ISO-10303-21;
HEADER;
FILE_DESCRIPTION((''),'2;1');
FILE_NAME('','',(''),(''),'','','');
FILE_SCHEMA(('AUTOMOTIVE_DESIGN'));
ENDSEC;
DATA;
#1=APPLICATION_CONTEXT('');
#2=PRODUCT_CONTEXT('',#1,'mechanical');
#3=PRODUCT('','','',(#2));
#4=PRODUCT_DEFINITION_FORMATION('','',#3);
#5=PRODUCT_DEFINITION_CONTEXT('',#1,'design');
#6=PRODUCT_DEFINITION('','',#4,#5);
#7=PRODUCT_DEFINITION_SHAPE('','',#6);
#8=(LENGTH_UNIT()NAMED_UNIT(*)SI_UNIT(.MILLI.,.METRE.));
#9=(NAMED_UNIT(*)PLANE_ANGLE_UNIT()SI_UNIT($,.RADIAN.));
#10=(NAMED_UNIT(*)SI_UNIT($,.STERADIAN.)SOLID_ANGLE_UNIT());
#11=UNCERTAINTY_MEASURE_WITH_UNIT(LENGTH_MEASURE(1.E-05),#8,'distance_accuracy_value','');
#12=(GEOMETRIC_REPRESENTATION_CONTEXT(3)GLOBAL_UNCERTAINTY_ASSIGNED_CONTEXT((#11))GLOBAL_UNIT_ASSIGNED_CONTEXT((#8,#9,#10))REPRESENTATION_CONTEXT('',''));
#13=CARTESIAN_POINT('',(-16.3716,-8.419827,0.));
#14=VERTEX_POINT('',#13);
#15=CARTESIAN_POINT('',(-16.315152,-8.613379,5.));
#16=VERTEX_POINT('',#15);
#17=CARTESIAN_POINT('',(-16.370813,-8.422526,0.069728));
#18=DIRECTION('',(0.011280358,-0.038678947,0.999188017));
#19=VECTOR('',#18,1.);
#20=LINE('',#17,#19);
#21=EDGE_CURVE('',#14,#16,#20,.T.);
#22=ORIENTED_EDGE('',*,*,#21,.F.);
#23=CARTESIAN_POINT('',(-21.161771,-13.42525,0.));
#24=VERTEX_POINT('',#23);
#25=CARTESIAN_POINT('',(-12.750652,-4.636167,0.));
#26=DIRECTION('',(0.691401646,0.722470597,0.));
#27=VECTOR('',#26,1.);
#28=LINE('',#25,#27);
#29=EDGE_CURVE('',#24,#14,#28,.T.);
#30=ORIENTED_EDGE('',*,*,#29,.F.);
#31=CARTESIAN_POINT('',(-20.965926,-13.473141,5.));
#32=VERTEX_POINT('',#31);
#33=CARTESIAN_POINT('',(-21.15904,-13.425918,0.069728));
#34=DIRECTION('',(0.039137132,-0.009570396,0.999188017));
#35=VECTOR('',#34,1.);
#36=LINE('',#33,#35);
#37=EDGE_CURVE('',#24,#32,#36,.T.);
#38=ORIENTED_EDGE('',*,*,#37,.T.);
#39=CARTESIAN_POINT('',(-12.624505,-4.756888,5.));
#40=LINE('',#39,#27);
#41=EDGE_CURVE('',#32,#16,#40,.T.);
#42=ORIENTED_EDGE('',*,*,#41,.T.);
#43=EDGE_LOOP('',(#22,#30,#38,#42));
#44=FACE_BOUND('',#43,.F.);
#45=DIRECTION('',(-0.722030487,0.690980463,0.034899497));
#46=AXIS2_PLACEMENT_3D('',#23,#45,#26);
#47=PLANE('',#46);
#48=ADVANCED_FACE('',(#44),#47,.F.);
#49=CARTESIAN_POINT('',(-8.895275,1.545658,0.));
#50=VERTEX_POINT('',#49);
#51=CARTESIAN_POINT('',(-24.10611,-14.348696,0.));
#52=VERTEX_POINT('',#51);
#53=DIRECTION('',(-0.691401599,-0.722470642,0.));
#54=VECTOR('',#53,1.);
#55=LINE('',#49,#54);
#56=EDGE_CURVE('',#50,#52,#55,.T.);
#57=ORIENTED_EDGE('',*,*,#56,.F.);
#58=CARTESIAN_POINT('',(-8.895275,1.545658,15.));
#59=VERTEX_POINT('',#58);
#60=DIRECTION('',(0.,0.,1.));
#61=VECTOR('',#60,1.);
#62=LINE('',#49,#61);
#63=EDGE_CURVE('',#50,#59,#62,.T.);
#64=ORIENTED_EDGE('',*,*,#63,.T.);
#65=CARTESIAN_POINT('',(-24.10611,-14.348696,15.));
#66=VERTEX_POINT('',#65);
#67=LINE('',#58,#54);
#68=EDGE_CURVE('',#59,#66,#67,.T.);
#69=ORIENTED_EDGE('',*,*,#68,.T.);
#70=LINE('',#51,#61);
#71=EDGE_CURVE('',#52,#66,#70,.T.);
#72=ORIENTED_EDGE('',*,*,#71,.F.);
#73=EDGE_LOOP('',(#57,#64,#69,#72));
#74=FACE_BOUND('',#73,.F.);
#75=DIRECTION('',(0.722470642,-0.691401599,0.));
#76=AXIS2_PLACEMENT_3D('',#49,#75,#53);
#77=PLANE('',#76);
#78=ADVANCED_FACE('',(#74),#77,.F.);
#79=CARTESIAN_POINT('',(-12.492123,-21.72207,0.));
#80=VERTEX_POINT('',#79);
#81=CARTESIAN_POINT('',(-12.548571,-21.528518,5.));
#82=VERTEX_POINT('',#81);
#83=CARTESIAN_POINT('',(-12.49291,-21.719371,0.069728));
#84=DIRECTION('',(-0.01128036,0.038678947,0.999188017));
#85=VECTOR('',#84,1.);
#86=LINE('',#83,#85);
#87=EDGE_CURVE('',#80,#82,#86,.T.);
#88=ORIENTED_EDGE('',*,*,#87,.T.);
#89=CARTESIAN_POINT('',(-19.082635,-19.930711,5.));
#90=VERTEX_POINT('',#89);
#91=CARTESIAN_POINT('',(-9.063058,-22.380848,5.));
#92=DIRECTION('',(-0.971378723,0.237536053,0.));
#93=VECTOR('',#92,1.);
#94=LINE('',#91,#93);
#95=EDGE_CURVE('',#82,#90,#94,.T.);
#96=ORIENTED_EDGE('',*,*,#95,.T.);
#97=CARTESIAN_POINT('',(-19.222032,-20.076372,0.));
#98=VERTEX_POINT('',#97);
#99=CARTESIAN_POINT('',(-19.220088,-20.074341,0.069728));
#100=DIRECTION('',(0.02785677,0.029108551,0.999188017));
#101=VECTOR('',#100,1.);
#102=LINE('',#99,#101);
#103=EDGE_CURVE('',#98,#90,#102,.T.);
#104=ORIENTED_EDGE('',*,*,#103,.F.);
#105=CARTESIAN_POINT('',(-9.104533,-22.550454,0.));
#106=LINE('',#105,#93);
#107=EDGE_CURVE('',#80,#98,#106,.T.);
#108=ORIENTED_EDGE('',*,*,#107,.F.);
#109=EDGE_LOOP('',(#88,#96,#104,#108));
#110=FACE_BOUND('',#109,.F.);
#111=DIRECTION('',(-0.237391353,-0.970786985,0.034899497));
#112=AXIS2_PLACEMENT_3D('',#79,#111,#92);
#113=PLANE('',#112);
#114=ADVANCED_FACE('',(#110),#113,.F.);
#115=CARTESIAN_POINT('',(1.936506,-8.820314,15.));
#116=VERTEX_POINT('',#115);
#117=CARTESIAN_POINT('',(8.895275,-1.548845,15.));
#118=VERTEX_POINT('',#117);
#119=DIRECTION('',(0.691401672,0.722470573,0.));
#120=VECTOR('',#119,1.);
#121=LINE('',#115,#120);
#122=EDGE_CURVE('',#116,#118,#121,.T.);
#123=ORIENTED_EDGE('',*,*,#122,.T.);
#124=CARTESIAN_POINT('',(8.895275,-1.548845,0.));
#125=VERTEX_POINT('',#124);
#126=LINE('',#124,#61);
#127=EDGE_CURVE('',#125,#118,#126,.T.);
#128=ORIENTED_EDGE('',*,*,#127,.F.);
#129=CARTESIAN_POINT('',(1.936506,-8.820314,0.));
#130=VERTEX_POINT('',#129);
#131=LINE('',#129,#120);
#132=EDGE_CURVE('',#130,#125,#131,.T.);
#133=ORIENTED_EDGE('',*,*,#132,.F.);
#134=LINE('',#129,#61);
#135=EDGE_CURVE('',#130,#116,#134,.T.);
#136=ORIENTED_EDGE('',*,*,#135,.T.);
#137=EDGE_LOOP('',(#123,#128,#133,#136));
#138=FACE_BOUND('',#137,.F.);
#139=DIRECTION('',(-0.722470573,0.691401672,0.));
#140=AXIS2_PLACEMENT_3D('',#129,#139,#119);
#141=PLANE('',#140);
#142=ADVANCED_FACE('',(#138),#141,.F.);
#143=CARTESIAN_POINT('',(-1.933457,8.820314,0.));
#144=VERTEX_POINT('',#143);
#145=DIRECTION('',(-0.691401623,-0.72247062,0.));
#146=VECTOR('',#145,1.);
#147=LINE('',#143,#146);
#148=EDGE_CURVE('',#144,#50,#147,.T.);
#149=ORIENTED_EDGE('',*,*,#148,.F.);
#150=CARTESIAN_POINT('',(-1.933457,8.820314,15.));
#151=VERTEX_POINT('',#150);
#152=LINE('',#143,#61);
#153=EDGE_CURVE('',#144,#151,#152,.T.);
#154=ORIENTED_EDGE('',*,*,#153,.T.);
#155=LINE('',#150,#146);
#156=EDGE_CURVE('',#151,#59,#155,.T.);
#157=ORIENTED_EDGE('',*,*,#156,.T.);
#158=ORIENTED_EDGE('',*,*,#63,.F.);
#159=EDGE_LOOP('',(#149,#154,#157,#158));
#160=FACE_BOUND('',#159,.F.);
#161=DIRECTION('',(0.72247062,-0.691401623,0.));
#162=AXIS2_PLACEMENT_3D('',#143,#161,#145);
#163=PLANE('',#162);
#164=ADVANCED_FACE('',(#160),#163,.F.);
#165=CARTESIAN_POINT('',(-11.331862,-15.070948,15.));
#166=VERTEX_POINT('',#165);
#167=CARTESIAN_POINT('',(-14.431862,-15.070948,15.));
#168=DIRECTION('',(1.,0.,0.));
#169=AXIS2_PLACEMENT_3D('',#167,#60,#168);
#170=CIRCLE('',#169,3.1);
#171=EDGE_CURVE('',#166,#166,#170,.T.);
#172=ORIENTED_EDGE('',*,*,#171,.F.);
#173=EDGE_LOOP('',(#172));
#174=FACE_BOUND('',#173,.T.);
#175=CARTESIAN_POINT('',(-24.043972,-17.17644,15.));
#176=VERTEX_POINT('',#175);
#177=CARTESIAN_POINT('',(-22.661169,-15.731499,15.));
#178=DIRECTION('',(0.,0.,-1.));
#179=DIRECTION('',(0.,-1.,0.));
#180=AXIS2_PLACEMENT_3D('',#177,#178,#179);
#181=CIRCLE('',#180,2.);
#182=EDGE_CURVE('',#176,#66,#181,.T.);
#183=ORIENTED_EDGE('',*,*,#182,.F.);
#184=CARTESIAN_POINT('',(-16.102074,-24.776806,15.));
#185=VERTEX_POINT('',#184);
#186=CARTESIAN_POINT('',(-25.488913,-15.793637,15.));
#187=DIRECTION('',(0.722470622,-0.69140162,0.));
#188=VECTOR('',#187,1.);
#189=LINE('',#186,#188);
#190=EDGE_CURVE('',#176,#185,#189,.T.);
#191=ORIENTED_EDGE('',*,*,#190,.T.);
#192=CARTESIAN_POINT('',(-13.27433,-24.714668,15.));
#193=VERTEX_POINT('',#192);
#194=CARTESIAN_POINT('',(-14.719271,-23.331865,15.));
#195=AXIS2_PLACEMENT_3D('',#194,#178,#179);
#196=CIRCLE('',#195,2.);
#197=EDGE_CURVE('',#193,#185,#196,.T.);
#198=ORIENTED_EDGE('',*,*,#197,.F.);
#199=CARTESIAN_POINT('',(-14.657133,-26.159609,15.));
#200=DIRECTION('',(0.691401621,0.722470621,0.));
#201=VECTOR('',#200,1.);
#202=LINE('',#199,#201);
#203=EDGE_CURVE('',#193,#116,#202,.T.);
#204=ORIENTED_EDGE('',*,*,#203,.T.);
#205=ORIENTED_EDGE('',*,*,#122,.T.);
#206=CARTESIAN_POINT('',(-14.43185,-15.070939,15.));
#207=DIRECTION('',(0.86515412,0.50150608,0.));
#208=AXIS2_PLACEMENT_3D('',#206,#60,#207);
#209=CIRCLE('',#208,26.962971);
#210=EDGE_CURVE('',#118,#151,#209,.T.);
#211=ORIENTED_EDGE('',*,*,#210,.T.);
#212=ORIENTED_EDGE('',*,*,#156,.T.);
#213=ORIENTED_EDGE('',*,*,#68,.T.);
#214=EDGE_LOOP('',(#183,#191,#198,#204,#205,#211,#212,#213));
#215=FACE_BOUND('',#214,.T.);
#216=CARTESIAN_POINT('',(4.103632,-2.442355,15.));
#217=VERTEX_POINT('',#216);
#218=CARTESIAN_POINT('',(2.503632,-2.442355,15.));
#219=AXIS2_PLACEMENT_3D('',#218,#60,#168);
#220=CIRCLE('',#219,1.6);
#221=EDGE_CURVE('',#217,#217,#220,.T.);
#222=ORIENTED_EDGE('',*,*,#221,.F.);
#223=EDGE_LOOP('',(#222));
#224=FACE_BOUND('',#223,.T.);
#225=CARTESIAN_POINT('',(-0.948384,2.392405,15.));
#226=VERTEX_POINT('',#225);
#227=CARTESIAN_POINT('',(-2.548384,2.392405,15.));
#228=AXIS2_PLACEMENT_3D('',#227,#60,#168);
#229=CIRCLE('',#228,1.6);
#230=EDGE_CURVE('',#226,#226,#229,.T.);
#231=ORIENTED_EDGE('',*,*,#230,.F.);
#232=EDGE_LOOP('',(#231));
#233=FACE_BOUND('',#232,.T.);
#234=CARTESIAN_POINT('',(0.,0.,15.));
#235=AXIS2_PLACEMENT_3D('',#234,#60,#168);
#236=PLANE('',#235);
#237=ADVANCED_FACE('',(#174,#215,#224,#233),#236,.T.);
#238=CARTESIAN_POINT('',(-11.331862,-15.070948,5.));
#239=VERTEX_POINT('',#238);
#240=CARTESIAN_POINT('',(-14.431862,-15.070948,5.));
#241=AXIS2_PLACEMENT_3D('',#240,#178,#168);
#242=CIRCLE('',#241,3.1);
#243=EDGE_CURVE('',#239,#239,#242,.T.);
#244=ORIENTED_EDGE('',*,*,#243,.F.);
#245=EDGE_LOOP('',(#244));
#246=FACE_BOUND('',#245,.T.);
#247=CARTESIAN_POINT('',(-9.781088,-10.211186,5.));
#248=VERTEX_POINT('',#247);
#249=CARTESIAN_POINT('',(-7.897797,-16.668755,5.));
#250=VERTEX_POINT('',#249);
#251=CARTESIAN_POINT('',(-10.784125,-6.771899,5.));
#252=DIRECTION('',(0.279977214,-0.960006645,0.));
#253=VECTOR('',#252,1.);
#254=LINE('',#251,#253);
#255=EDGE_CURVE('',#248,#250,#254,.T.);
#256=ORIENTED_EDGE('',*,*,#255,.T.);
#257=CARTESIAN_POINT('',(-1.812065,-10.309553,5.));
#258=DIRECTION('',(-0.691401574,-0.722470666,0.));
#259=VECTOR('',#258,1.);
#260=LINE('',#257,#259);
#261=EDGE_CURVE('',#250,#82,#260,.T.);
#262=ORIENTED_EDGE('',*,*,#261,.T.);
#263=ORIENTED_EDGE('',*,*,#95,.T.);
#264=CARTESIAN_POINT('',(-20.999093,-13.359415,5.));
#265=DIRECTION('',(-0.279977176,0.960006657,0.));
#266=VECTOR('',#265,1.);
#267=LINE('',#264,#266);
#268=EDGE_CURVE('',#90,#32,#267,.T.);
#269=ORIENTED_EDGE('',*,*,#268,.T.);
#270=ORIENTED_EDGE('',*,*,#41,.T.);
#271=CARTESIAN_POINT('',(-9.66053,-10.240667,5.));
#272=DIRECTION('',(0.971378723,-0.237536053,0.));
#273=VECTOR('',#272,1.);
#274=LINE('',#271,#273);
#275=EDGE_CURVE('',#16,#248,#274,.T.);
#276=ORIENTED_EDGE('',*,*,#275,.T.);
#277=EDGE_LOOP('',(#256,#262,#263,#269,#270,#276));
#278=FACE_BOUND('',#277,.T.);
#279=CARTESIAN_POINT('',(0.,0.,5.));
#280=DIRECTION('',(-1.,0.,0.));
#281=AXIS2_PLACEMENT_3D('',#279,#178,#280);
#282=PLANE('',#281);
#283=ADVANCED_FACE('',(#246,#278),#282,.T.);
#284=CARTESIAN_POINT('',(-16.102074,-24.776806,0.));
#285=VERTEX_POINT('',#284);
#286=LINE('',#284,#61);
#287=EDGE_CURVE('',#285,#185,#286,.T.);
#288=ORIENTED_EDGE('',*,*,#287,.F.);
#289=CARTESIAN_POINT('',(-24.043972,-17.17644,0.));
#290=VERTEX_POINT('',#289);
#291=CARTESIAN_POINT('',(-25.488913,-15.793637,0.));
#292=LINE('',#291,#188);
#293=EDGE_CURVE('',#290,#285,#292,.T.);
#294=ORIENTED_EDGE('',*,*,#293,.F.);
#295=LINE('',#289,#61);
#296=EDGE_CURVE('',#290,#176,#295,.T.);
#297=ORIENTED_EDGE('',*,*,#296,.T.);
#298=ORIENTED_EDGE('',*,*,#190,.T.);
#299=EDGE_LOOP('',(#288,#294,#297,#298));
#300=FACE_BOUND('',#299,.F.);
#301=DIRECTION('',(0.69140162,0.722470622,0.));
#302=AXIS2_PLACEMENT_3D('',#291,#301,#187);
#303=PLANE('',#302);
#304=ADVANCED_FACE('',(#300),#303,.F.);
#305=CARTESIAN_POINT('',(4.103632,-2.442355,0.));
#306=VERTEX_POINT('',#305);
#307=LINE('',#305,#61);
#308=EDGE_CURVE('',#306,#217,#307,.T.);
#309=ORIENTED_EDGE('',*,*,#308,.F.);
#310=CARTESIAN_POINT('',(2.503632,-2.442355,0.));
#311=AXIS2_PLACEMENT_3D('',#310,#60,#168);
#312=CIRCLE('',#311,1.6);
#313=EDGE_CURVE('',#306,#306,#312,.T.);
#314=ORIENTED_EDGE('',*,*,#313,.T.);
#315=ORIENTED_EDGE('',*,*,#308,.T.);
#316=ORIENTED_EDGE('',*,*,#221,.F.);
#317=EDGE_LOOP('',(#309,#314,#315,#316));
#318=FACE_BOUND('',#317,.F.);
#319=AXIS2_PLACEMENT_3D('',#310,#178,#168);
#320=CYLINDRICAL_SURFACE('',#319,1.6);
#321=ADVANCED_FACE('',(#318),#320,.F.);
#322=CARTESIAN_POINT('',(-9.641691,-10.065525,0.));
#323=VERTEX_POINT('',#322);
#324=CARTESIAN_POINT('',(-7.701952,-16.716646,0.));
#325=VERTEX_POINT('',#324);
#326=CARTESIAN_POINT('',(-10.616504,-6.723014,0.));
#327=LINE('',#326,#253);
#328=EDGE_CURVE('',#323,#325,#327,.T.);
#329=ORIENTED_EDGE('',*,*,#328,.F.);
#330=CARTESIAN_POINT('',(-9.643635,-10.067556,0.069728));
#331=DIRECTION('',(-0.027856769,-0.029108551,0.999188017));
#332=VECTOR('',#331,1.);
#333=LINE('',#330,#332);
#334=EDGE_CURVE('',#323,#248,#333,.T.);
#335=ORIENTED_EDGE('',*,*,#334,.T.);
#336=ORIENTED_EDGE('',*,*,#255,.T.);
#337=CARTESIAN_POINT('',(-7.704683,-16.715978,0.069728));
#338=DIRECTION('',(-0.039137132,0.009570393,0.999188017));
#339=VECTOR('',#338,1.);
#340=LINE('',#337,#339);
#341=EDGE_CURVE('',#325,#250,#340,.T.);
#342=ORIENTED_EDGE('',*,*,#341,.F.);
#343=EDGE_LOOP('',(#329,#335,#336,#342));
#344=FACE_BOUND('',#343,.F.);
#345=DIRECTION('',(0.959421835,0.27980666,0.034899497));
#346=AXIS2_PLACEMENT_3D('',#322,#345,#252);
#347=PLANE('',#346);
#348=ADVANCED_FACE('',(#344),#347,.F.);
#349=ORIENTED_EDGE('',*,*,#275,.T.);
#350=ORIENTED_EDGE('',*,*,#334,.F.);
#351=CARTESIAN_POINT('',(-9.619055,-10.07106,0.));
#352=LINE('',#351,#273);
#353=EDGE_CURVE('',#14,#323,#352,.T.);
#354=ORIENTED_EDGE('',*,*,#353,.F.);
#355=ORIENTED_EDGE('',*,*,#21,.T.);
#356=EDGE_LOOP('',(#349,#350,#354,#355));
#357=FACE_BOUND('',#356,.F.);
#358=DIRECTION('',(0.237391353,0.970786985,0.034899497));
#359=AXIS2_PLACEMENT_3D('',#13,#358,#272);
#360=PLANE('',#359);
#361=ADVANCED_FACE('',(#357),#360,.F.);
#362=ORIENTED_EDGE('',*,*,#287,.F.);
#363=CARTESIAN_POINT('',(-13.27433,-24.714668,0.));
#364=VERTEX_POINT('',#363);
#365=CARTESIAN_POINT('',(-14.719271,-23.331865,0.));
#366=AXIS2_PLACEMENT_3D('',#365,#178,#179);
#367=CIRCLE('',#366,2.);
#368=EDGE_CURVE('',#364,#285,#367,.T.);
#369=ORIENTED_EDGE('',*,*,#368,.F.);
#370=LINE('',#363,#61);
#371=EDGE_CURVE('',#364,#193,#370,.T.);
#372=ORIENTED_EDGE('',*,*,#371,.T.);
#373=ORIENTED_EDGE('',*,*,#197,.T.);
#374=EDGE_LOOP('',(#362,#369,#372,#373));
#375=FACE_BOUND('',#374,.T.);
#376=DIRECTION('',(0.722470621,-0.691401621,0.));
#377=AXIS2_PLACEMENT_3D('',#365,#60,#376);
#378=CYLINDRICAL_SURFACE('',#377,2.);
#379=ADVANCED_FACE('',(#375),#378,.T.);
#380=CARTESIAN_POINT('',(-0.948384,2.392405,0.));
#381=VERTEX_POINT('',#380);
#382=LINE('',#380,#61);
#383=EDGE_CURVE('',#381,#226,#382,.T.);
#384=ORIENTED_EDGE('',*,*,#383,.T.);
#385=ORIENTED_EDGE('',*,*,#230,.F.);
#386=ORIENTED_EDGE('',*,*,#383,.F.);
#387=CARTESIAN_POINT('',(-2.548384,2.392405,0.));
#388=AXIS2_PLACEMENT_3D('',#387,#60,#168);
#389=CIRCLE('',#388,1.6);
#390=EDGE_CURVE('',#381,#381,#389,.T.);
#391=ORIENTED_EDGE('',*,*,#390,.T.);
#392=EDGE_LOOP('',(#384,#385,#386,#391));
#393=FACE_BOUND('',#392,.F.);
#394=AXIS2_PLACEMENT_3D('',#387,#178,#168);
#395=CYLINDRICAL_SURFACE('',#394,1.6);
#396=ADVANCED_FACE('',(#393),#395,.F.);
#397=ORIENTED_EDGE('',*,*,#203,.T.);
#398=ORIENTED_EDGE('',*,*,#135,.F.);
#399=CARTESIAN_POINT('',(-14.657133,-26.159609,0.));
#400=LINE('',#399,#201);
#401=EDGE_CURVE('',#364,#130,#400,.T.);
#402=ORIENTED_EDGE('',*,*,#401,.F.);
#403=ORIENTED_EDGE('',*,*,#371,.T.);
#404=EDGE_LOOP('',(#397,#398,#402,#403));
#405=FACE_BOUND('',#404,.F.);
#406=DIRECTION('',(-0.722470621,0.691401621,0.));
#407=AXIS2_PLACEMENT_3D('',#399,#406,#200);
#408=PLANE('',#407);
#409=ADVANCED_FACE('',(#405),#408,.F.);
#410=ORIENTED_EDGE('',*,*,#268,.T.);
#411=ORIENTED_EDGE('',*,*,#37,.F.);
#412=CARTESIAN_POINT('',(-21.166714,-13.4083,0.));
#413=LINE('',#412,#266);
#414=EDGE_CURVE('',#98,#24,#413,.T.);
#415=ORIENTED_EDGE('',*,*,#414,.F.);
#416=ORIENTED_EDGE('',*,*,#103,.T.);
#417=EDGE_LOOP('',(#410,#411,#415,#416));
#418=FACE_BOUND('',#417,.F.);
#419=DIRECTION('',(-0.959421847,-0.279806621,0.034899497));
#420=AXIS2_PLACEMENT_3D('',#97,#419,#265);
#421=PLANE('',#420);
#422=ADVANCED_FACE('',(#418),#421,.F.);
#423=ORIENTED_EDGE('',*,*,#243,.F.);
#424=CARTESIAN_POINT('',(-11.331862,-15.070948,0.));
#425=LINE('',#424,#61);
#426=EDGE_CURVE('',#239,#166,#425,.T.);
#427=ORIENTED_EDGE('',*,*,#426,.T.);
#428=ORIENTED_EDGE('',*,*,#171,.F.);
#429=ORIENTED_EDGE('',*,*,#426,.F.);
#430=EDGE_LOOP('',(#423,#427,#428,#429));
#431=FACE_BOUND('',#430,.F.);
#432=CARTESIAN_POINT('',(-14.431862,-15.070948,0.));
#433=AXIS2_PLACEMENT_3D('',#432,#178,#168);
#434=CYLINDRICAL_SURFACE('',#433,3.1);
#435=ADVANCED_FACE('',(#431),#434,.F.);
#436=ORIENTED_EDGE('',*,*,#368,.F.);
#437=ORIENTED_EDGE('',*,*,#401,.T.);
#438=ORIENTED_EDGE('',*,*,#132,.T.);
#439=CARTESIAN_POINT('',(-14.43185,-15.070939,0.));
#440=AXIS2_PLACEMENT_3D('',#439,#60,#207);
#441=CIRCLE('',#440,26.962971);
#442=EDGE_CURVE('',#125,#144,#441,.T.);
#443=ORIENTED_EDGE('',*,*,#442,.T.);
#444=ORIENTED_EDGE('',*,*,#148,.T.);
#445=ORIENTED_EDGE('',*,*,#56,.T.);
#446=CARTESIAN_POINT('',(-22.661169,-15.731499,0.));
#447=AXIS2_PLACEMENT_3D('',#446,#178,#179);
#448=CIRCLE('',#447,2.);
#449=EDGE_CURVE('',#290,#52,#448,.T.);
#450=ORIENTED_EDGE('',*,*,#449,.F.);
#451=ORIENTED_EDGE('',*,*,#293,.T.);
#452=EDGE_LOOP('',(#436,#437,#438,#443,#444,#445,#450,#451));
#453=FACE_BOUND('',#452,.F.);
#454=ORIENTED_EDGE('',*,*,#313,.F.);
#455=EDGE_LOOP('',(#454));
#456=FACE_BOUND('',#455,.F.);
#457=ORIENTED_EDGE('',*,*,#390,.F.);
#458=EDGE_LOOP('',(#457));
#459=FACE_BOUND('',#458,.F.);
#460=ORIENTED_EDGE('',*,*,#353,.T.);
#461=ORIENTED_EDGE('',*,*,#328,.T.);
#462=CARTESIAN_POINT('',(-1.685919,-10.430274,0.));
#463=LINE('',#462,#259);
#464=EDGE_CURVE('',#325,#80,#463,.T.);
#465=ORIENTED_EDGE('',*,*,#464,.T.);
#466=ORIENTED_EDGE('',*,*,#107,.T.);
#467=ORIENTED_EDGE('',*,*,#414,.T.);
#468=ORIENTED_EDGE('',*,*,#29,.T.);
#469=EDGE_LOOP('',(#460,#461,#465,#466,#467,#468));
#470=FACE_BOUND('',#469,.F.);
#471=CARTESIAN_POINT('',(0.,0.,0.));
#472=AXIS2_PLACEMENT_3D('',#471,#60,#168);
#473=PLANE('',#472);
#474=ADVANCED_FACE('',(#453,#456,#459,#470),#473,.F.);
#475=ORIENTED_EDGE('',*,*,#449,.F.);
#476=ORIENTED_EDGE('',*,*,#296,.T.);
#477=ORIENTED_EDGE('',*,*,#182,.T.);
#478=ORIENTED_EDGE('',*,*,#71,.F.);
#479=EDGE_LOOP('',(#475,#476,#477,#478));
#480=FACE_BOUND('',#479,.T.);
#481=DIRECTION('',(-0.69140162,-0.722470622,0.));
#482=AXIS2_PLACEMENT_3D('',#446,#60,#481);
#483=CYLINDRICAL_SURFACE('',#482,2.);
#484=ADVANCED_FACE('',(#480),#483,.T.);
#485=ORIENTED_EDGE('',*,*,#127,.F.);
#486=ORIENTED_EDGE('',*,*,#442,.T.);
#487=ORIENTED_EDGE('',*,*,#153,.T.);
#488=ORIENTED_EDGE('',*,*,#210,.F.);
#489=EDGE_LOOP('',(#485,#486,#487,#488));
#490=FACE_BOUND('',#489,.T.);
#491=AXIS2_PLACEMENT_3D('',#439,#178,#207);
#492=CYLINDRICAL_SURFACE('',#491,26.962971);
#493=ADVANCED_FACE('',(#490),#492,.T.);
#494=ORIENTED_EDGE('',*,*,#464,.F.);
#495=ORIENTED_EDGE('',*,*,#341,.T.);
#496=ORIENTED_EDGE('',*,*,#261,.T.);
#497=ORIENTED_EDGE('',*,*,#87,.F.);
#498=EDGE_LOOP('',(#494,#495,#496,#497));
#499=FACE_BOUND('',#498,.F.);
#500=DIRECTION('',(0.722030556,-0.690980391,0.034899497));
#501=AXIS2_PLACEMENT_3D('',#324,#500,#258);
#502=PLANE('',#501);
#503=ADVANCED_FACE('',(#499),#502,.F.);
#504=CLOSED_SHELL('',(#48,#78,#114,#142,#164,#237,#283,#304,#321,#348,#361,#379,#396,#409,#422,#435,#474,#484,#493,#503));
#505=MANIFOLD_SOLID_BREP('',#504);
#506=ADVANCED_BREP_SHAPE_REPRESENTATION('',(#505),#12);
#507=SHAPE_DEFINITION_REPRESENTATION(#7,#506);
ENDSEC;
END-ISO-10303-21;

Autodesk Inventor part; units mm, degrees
ref_plane "YZ Plane" through (0, 0, 0) normal (1, 0, 0) x (0, 1, 0)
ref_plane "XZ Plane" through (0, 0, 0) normal (0, 1, 0) x (-1, 0, 0)
ref_plane "XY Plane" through (0, 0, 0) normal (0, 0, 1) x (1, 0, 0)
sketch "Skizze1" plane through (0, 0, 0) normal (0, 0, 1) x (1, 0, 0)
  circle A0 centre (2.503632, -2.442355) radius 1.4 construction
  circle A1 centre (-2.548384, 2.392405) radius 1.4 construction
  arc A2 (8.895275, -1.548845) -> (-1.933457, 8.820314) centre (-14.431862, -15.070948) ccw
  line L0 (-1.933457, 8.820314) -> (-8.895275, 1.545658)
  line L1 (-8.895275, 1.545658) -> (1.936506, -8.820314)
  line L2 (1.936506, -8.820314) -> (8.895275, -1.548845)
  arc A3 (-17.414954, -14.752893) -> (-12.725508, -17.538408) centre (-14.431862, -15.070948) ccw
  line L3 (-8.895275, 1.545658) -> (-25.488913, -15.793637)
  line L4 (-25.488913, -15.793637) -> (-14.657133, -26.159609)
  line L5 (-14.657133, -26.159609) -> (1.936506, -8.820314)
  arc A4 (-13.288846, -12.847547) -> (-12.20846, -16.213964) centre (-14.431862, -15.070948) ccw
  circle A5 centre (-14.431862, -15.070948) radius 3.1
  circle A6 centre (-2.548384, 2.392405) radius 1.6
  circle A7 centre (2.503632, -2.442355) radius 1.6
  circle A8 centre (-22.802017, -23.070943) radius 1.4
  circle A9 centre (-6.057441, -7.070954) radius 1.4
  point P0 (0, 0)
  dimension "d0" = 24
  dimension "d1" = 6.2
  dimension "d2" = 3.2
  dimension "d3" = 3.2
extrude "Extrusion1" add sketch "Skizze1" along normal blind 15 contours L2 L1 L0 A2 | L5 L4 L3 L1 | A9
sketch "Skizze2" plane through (0, 0, 15) normal (0, 0, 1) x (1, 0, 0)
  point P0 (0, 0)
sketch "Skizze3" plane through (0, 0, 15) normal (0, 0, 1) x (1, 0, 0)
  point P0 (0, 0)
fillet "Rundung1" radius 2 2 edges at (-14.6571, -26.1596, 7.5) (-25.4889, -15.7936, 7.5)
sketch "Skizze4" plane through (0, 0, 0) normal (0, 0, -1) x (-1, 0, 0)
  circle A0 centre (14.431862, -15.070948) radius 3.1
  line L0 (21.161771, -13.42525) -> (19.222032, -20.076372)
  line L1 (19.222032, -20.076372) -> (12.492123, -21.72207)
  line L2 (12.492123, -21.72207) -> (7.701952, -16.716646)
  line L3 (7.701952, -16.716646) -> (9.641691, -10.065525)
  line L4 (9.641691, -10.065525) -> (16.3716, -8.419827)
  line L5 (16.3716, -8.419827) -> (21.161771, -13.42525)
  line L6 (1.933457, 8.820314) -> (24.10611, -14.348696)
  point P0 (0, 0)
  dimension "d10" = 12
sketch "Skizze4 outline for Extrusion2" plane through (0, 0, 0) normal (0, 0, -1) x (-1, 0, 0)
  line L0 (21.161771, -13.42525) -> (16.3716, -8.419827)
  line L1 (19.222032, -20.076372) -> (21.161771, -13.42525)
  line L2 (12.492123, -21.72207) -> (19.222032, -20.076372)
  line L3 (7.701952, -16.716646) -> (12.492123, -21.72207)
  line L4 (9.641691, -10.065525) -> (7.701952, -16.716646)
  line L5 (16.3716, -8.419827) -> (9.641691, -10.065525)
extrude "Extrusion2" cut sketch "Skizze4 outline for Extrusion2" against normal blind 5 draft -2
properties part number "IM_Matchboxscope_Laserholder_M12"
